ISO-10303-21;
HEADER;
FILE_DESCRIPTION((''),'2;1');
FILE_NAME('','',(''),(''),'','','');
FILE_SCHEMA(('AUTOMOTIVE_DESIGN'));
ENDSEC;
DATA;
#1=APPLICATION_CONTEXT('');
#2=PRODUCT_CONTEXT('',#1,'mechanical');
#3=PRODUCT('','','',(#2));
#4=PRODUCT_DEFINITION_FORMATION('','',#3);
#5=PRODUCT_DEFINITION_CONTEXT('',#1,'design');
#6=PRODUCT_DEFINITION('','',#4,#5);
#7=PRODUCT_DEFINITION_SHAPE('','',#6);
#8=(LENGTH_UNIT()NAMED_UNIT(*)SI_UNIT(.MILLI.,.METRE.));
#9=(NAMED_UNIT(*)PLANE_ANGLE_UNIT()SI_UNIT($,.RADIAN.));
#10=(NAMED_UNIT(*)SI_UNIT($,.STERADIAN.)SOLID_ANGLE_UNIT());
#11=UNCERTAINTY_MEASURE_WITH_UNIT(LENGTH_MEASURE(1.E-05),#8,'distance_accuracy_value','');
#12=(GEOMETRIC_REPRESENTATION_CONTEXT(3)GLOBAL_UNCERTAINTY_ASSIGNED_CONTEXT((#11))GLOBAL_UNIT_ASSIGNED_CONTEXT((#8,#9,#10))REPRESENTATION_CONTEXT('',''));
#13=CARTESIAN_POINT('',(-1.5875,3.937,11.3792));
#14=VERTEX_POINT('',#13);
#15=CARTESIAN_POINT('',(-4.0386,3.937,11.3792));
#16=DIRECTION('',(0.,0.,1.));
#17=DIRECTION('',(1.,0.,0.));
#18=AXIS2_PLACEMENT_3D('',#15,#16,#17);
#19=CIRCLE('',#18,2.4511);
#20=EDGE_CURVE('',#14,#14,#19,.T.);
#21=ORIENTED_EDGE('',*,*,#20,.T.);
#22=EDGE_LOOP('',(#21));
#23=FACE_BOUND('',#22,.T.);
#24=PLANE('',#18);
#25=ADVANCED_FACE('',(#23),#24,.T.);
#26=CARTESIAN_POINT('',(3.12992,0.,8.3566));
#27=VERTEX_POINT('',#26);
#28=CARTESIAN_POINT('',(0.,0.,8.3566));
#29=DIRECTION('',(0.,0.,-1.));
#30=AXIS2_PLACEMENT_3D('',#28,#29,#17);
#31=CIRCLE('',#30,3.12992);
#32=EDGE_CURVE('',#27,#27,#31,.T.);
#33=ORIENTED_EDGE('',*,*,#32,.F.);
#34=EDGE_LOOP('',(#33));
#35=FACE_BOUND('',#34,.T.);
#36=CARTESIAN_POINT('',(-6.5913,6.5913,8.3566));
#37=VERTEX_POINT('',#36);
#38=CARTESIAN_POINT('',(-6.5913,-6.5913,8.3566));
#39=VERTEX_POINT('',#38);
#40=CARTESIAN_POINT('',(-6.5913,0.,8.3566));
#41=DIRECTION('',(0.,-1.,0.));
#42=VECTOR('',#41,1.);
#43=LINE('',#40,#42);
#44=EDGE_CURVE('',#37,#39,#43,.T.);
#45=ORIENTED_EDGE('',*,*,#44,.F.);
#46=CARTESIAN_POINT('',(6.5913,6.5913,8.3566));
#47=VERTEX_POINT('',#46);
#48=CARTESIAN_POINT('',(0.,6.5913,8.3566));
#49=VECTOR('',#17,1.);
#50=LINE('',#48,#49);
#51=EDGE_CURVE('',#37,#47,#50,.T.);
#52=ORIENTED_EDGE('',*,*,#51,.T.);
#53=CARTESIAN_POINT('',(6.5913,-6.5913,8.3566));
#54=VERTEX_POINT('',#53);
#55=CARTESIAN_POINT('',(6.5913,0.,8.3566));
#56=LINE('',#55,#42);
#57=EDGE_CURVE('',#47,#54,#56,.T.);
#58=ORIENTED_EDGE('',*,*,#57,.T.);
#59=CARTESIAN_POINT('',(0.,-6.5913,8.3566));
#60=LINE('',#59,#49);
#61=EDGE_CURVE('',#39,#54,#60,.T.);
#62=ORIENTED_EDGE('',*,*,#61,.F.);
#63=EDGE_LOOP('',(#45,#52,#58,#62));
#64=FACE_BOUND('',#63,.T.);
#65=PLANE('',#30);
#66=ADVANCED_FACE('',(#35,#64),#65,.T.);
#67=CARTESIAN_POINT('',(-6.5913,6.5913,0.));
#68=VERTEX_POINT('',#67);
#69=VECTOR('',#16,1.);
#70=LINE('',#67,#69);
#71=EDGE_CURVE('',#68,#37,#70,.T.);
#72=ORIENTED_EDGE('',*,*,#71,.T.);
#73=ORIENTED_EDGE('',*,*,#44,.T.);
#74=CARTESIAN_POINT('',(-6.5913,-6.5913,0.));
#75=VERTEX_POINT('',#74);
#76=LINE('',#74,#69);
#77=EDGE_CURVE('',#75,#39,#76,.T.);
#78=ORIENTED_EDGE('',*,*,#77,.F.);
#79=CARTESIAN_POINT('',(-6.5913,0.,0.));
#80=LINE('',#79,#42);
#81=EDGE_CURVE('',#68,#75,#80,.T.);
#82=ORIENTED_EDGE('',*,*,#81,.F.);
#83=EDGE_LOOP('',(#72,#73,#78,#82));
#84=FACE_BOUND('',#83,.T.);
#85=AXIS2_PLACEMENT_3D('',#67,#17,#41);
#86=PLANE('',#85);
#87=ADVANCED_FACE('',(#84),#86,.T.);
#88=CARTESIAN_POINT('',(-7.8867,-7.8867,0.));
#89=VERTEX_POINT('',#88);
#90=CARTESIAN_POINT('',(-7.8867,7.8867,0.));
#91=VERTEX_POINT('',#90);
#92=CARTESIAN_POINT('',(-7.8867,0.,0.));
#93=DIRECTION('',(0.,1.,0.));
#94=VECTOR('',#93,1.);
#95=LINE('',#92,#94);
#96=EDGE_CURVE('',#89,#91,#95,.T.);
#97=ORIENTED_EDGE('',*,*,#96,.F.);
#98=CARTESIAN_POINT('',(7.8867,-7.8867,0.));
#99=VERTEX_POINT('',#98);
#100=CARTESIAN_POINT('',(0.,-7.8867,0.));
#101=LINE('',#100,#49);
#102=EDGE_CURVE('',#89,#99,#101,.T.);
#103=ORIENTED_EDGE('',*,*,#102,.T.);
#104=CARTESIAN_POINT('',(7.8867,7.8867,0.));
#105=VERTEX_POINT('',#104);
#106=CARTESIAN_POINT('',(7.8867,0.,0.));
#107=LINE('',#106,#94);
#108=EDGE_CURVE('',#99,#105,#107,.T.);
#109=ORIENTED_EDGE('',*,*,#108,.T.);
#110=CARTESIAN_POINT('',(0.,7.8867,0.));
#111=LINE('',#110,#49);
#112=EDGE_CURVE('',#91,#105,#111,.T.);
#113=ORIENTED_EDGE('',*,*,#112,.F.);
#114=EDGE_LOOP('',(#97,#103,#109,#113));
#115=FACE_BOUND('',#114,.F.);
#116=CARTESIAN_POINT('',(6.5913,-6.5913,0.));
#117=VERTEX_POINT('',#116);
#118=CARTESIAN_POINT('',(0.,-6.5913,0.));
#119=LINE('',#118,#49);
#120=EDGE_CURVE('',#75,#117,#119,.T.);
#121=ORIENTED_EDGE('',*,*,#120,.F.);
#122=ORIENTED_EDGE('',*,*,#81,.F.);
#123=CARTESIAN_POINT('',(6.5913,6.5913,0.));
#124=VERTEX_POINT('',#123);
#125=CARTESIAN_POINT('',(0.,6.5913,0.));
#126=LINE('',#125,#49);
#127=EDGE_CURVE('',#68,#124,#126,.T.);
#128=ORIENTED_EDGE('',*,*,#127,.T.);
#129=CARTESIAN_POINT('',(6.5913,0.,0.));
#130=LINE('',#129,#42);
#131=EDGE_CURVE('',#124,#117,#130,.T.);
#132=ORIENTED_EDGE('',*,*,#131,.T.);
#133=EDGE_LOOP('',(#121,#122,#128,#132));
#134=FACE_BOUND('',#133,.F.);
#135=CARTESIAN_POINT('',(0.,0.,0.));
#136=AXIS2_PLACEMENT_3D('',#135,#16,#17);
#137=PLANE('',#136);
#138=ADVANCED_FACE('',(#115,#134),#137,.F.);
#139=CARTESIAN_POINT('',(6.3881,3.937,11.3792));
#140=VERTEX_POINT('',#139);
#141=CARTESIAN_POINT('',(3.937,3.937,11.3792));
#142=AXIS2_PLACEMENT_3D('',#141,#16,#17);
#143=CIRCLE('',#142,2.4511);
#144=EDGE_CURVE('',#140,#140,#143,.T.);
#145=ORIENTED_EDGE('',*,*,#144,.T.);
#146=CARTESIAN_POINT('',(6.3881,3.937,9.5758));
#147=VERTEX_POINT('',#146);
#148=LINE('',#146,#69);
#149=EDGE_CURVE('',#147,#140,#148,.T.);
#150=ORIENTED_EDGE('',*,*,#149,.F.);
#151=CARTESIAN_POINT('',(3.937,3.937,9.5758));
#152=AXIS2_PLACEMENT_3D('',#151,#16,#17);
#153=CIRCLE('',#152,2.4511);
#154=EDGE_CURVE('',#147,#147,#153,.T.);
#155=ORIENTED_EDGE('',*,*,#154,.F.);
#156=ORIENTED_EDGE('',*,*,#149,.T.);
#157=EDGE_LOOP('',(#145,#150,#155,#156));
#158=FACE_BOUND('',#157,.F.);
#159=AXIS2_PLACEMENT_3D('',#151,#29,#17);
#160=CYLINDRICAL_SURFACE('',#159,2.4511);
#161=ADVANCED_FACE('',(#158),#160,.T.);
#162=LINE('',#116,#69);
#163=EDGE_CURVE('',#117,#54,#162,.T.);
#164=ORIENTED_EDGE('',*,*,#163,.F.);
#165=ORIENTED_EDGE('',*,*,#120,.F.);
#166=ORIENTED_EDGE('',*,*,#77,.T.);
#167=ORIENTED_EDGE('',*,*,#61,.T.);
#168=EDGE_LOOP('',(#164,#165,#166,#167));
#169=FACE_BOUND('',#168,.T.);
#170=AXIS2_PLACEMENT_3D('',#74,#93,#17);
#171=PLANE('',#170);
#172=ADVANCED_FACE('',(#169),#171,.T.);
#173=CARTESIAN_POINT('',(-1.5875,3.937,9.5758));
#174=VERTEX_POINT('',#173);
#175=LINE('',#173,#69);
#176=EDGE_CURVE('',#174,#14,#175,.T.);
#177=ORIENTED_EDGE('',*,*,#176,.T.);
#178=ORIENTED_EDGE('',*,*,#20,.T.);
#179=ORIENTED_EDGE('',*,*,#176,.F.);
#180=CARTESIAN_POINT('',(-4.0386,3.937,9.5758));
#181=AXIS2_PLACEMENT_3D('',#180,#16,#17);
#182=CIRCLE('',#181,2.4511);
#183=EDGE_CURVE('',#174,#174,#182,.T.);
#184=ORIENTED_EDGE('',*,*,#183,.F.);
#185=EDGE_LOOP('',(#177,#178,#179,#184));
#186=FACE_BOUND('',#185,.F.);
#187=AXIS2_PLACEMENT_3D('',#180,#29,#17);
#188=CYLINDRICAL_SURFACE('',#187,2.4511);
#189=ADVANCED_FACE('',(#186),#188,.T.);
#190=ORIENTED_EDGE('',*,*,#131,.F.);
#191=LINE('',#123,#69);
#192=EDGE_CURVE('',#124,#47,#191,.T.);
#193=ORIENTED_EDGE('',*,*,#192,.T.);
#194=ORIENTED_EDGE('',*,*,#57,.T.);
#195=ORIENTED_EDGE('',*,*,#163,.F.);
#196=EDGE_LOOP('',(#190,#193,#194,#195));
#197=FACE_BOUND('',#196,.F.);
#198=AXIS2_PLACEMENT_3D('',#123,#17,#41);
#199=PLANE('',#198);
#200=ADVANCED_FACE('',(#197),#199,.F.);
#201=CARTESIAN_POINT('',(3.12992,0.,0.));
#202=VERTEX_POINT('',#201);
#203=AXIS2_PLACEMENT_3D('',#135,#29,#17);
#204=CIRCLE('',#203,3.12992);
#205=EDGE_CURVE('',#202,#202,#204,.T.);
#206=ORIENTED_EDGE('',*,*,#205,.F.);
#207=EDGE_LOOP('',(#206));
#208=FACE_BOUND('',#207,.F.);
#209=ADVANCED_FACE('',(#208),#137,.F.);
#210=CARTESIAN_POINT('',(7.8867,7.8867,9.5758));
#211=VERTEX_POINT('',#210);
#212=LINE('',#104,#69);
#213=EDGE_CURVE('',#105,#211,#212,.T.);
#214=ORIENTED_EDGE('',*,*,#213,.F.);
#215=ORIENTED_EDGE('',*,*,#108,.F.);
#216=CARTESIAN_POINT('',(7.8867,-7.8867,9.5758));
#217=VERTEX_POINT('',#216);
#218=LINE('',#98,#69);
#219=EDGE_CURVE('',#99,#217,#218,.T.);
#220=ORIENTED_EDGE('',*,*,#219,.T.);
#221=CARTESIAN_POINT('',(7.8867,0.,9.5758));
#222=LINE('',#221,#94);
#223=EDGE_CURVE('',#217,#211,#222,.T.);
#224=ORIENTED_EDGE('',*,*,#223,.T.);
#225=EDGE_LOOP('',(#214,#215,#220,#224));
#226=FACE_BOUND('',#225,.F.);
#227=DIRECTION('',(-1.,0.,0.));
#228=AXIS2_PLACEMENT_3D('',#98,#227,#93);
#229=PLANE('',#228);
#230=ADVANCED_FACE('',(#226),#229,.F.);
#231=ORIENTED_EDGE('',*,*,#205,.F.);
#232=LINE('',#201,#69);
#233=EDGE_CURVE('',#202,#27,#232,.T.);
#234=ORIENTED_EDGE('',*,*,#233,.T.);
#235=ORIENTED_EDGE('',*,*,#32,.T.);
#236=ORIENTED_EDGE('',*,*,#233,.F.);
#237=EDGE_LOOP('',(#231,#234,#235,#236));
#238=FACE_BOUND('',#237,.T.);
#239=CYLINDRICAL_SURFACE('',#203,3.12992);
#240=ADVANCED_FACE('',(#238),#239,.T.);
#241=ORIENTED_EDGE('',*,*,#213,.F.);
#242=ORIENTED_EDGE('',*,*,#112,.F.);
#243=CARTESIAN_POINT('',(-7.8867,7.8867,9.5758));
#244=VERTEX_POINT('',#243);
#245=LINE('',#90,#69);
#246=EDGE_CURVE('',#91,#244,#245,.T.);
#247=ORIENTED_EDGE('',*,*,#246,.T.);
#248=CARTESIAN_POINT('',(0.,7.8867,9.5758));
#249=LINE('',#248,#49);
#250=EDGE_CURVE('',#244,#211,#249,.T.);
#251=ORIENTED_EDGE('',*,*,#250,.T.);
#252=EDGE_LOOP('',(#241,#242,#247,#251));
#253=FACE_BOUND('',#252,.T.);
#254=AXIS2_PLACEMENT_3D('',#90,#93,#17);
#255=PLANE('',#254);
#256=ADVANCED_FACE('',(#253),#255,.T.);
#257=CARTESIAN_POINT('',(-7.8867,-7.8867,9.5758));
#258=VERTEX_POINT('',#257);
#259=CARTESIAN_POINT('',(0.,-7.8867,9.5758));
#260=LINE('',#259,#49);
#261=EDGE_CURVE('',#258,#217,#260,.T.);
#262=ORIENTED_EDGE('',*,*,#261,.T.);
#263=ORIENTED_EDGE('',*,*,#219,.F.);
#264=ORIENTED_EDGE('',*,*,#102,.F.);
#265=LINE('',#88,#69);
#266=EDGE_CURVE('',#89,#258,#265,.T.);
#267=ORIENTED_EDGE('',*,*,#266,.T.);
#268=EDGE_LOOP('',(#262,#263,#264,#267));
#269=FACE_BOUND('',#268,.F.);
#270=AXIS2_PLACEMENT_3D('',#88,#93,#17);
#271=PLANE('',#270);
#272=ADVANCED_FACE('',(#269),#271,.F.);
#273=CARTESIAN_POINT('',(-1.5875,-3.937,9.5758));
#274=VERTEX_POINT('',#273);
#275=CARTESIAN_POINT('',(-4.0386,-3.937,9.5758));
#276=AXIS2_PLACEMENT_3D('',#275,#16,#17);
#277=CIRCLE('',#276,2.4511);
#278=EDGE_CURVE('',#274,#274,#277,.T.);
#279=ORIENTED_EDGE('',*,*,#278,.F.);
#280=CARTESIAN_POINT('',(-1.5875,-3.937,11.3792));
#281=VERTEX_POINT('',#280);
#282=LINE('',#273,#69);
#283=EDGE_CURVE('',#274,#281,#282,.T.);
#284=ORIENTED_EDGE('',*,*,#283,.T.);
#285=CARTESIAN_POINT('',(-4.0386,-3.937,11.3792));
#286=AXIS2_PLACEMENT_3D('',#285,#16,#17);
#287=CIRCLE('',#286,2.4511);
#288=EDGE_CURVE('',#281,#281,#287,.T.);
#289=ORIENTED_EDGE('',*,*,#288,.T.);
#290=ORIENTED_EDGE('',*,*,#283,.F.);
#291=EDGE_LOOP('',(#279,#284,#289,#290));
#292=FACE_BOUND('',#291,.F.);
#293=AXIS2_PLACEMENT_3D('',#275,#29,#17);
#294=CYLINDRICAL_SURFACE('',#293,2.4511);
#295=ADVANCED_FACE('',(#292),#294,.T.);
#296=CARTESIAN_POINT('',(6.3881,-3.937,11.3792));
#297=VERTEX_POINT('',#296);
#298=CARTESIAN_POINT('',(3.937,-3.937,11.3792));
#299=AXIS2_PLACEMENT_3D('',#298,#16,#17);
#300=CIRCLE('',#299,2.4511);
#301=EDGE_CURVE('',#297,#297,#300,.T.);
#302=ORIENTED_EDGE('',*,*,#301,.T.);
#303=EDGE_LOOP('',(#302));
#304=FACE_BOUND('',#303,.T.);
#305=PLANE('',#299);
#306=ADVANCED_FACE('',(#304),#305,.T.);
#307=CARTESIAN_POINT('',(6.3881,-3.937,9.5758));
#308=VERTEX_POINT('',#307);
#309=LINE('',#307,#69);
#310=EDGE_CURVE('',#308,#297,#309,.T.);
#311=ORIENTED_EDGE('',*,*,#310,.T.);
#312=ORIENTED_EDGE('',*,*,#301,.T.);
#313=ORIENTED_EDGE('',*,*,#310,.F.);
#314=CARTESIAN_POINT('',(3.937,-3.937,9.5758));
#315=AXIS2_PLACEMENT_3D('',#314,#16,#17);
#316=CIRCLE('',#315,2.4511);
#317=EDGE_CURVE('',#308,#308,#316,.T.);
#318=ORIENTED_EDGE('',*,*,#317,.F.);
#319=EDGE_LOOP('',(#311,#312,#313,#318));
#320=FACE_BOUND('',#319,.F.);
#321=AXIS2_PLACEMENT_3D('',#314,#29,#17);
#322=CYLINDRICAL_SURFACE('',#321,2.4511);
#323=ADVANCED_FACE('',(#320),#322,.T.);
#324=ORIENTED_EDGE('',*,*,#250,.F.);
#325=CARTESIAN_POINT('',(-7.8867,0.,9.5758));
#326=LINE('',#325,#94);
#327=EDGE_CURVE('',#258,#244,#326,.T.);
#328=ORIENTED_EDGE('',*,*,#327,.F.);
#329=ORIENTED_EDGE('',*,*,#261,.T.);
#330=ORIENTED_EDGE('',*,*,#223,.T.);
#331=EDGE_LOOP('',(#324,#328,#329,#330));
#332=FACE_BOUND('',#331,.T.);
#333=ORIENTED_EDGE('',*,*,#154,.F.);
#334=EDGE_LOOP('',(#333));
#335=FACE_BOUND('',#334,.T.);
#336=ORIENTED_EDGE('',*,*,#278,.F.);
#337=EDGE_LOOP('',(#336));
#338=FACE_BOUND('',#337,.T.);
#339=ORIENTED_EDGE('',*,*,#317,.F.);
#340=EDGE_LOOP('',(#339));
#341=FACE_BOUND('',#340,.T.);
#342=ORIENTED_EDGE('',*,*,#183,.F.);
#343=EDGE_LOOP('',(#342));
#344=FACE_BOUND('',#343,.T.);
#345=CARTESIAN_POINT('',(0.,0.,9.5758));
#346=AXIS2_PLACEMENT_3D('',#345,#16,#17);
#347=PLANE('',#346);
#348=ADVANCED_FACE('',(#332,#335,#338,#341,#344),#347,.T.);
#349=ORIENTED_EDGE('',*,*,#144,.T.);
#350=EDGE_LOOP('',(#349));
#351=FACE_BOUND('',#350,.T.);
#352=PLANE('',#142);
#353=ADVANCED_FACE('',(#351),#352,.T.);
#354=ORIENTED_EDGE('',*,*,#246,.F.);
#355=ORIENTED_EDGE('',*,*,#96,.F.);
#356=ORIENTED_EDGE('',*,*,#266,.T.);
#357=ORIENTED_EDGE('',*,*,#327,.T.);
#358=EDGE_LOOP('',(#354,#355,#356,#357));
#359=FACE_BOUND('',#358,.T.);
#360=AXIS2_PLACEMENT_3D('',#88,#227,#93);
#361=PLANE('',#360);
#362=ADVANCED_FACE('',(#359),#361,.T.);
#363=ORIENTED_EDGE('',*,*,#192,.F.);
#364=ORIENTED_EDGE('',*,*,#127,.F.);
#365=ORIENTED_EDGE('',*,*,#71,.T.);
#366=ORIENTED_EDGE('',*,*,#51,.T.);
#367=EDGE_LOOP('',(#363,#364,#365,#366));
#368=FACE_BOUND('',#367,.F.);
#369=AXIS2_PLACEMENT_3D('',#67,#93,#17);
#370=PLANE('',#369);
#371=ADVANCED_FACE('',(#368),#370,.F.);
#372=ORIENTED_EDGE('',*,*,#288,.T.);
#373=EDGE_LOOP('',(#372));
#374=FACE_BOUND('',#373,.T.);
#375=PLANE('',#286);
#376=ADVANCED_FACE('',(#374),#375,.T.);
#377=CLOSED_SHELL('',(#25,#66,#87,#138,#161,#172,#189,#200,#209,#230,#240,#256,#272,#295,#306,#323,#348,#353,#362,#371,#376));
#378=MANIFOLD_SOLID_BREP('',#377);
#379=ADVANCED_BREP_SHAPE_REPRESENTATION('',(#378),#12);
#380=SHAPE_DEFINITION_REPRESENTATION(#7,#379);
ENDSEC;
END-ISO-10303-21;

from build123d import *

# Parameters (mm, degrees)
F0_W     = 15.7734
F0_H     = 15.7734
F1_DEPTH = 9.5758
F2_R     = 2.4511
F3_DEPTH = 1.8034
F5_W     = 13.1826
F5_H     = 13.1826
F5_R     = 3.1299195118
F6_DEPTH = 8.3566


# Not quite as in the source:
# - a feature names something its author has since deleted; it is built from what else it names


with BuildPart() as f1:
    # F0 (on Top) → F1 (new body)
    with BuildSketch(Plane.XY):
        Rectangle(F0_W, F0_H)
    extrude(amount=F1_DEPTH)

    # F2 (on face) → F3 (join)
    with BuildSketch(Plane.XY.offset(9.5758)):
        with Locations((-4.0386, -3.937)):
            Circle(F2_R)
        with Locations((3.937, -3.937)):
            Circle(F2_R)
        with Locations((3.937, 3.937)):
            Circle(F2_R)
        with Locations((-4.0386, 3.937)):
            Circle(F2_R)
    extrude(amount=F3_DEPTH)

    # F5 (on face) → F6 (cut)
    with BuildSketch(Plane(origin=(0, 0, 0), x_dir=(1, 0, 0), z_dir=(0, 0, -1))):
        Rectangle(F5_W, F5_H)
        Circle(F5_R, mode=Mode.SUBTRACT)
    extrude(amount=-F6_DEPTH, mode=Mode.SUBTRACT)


solid = f1.part
